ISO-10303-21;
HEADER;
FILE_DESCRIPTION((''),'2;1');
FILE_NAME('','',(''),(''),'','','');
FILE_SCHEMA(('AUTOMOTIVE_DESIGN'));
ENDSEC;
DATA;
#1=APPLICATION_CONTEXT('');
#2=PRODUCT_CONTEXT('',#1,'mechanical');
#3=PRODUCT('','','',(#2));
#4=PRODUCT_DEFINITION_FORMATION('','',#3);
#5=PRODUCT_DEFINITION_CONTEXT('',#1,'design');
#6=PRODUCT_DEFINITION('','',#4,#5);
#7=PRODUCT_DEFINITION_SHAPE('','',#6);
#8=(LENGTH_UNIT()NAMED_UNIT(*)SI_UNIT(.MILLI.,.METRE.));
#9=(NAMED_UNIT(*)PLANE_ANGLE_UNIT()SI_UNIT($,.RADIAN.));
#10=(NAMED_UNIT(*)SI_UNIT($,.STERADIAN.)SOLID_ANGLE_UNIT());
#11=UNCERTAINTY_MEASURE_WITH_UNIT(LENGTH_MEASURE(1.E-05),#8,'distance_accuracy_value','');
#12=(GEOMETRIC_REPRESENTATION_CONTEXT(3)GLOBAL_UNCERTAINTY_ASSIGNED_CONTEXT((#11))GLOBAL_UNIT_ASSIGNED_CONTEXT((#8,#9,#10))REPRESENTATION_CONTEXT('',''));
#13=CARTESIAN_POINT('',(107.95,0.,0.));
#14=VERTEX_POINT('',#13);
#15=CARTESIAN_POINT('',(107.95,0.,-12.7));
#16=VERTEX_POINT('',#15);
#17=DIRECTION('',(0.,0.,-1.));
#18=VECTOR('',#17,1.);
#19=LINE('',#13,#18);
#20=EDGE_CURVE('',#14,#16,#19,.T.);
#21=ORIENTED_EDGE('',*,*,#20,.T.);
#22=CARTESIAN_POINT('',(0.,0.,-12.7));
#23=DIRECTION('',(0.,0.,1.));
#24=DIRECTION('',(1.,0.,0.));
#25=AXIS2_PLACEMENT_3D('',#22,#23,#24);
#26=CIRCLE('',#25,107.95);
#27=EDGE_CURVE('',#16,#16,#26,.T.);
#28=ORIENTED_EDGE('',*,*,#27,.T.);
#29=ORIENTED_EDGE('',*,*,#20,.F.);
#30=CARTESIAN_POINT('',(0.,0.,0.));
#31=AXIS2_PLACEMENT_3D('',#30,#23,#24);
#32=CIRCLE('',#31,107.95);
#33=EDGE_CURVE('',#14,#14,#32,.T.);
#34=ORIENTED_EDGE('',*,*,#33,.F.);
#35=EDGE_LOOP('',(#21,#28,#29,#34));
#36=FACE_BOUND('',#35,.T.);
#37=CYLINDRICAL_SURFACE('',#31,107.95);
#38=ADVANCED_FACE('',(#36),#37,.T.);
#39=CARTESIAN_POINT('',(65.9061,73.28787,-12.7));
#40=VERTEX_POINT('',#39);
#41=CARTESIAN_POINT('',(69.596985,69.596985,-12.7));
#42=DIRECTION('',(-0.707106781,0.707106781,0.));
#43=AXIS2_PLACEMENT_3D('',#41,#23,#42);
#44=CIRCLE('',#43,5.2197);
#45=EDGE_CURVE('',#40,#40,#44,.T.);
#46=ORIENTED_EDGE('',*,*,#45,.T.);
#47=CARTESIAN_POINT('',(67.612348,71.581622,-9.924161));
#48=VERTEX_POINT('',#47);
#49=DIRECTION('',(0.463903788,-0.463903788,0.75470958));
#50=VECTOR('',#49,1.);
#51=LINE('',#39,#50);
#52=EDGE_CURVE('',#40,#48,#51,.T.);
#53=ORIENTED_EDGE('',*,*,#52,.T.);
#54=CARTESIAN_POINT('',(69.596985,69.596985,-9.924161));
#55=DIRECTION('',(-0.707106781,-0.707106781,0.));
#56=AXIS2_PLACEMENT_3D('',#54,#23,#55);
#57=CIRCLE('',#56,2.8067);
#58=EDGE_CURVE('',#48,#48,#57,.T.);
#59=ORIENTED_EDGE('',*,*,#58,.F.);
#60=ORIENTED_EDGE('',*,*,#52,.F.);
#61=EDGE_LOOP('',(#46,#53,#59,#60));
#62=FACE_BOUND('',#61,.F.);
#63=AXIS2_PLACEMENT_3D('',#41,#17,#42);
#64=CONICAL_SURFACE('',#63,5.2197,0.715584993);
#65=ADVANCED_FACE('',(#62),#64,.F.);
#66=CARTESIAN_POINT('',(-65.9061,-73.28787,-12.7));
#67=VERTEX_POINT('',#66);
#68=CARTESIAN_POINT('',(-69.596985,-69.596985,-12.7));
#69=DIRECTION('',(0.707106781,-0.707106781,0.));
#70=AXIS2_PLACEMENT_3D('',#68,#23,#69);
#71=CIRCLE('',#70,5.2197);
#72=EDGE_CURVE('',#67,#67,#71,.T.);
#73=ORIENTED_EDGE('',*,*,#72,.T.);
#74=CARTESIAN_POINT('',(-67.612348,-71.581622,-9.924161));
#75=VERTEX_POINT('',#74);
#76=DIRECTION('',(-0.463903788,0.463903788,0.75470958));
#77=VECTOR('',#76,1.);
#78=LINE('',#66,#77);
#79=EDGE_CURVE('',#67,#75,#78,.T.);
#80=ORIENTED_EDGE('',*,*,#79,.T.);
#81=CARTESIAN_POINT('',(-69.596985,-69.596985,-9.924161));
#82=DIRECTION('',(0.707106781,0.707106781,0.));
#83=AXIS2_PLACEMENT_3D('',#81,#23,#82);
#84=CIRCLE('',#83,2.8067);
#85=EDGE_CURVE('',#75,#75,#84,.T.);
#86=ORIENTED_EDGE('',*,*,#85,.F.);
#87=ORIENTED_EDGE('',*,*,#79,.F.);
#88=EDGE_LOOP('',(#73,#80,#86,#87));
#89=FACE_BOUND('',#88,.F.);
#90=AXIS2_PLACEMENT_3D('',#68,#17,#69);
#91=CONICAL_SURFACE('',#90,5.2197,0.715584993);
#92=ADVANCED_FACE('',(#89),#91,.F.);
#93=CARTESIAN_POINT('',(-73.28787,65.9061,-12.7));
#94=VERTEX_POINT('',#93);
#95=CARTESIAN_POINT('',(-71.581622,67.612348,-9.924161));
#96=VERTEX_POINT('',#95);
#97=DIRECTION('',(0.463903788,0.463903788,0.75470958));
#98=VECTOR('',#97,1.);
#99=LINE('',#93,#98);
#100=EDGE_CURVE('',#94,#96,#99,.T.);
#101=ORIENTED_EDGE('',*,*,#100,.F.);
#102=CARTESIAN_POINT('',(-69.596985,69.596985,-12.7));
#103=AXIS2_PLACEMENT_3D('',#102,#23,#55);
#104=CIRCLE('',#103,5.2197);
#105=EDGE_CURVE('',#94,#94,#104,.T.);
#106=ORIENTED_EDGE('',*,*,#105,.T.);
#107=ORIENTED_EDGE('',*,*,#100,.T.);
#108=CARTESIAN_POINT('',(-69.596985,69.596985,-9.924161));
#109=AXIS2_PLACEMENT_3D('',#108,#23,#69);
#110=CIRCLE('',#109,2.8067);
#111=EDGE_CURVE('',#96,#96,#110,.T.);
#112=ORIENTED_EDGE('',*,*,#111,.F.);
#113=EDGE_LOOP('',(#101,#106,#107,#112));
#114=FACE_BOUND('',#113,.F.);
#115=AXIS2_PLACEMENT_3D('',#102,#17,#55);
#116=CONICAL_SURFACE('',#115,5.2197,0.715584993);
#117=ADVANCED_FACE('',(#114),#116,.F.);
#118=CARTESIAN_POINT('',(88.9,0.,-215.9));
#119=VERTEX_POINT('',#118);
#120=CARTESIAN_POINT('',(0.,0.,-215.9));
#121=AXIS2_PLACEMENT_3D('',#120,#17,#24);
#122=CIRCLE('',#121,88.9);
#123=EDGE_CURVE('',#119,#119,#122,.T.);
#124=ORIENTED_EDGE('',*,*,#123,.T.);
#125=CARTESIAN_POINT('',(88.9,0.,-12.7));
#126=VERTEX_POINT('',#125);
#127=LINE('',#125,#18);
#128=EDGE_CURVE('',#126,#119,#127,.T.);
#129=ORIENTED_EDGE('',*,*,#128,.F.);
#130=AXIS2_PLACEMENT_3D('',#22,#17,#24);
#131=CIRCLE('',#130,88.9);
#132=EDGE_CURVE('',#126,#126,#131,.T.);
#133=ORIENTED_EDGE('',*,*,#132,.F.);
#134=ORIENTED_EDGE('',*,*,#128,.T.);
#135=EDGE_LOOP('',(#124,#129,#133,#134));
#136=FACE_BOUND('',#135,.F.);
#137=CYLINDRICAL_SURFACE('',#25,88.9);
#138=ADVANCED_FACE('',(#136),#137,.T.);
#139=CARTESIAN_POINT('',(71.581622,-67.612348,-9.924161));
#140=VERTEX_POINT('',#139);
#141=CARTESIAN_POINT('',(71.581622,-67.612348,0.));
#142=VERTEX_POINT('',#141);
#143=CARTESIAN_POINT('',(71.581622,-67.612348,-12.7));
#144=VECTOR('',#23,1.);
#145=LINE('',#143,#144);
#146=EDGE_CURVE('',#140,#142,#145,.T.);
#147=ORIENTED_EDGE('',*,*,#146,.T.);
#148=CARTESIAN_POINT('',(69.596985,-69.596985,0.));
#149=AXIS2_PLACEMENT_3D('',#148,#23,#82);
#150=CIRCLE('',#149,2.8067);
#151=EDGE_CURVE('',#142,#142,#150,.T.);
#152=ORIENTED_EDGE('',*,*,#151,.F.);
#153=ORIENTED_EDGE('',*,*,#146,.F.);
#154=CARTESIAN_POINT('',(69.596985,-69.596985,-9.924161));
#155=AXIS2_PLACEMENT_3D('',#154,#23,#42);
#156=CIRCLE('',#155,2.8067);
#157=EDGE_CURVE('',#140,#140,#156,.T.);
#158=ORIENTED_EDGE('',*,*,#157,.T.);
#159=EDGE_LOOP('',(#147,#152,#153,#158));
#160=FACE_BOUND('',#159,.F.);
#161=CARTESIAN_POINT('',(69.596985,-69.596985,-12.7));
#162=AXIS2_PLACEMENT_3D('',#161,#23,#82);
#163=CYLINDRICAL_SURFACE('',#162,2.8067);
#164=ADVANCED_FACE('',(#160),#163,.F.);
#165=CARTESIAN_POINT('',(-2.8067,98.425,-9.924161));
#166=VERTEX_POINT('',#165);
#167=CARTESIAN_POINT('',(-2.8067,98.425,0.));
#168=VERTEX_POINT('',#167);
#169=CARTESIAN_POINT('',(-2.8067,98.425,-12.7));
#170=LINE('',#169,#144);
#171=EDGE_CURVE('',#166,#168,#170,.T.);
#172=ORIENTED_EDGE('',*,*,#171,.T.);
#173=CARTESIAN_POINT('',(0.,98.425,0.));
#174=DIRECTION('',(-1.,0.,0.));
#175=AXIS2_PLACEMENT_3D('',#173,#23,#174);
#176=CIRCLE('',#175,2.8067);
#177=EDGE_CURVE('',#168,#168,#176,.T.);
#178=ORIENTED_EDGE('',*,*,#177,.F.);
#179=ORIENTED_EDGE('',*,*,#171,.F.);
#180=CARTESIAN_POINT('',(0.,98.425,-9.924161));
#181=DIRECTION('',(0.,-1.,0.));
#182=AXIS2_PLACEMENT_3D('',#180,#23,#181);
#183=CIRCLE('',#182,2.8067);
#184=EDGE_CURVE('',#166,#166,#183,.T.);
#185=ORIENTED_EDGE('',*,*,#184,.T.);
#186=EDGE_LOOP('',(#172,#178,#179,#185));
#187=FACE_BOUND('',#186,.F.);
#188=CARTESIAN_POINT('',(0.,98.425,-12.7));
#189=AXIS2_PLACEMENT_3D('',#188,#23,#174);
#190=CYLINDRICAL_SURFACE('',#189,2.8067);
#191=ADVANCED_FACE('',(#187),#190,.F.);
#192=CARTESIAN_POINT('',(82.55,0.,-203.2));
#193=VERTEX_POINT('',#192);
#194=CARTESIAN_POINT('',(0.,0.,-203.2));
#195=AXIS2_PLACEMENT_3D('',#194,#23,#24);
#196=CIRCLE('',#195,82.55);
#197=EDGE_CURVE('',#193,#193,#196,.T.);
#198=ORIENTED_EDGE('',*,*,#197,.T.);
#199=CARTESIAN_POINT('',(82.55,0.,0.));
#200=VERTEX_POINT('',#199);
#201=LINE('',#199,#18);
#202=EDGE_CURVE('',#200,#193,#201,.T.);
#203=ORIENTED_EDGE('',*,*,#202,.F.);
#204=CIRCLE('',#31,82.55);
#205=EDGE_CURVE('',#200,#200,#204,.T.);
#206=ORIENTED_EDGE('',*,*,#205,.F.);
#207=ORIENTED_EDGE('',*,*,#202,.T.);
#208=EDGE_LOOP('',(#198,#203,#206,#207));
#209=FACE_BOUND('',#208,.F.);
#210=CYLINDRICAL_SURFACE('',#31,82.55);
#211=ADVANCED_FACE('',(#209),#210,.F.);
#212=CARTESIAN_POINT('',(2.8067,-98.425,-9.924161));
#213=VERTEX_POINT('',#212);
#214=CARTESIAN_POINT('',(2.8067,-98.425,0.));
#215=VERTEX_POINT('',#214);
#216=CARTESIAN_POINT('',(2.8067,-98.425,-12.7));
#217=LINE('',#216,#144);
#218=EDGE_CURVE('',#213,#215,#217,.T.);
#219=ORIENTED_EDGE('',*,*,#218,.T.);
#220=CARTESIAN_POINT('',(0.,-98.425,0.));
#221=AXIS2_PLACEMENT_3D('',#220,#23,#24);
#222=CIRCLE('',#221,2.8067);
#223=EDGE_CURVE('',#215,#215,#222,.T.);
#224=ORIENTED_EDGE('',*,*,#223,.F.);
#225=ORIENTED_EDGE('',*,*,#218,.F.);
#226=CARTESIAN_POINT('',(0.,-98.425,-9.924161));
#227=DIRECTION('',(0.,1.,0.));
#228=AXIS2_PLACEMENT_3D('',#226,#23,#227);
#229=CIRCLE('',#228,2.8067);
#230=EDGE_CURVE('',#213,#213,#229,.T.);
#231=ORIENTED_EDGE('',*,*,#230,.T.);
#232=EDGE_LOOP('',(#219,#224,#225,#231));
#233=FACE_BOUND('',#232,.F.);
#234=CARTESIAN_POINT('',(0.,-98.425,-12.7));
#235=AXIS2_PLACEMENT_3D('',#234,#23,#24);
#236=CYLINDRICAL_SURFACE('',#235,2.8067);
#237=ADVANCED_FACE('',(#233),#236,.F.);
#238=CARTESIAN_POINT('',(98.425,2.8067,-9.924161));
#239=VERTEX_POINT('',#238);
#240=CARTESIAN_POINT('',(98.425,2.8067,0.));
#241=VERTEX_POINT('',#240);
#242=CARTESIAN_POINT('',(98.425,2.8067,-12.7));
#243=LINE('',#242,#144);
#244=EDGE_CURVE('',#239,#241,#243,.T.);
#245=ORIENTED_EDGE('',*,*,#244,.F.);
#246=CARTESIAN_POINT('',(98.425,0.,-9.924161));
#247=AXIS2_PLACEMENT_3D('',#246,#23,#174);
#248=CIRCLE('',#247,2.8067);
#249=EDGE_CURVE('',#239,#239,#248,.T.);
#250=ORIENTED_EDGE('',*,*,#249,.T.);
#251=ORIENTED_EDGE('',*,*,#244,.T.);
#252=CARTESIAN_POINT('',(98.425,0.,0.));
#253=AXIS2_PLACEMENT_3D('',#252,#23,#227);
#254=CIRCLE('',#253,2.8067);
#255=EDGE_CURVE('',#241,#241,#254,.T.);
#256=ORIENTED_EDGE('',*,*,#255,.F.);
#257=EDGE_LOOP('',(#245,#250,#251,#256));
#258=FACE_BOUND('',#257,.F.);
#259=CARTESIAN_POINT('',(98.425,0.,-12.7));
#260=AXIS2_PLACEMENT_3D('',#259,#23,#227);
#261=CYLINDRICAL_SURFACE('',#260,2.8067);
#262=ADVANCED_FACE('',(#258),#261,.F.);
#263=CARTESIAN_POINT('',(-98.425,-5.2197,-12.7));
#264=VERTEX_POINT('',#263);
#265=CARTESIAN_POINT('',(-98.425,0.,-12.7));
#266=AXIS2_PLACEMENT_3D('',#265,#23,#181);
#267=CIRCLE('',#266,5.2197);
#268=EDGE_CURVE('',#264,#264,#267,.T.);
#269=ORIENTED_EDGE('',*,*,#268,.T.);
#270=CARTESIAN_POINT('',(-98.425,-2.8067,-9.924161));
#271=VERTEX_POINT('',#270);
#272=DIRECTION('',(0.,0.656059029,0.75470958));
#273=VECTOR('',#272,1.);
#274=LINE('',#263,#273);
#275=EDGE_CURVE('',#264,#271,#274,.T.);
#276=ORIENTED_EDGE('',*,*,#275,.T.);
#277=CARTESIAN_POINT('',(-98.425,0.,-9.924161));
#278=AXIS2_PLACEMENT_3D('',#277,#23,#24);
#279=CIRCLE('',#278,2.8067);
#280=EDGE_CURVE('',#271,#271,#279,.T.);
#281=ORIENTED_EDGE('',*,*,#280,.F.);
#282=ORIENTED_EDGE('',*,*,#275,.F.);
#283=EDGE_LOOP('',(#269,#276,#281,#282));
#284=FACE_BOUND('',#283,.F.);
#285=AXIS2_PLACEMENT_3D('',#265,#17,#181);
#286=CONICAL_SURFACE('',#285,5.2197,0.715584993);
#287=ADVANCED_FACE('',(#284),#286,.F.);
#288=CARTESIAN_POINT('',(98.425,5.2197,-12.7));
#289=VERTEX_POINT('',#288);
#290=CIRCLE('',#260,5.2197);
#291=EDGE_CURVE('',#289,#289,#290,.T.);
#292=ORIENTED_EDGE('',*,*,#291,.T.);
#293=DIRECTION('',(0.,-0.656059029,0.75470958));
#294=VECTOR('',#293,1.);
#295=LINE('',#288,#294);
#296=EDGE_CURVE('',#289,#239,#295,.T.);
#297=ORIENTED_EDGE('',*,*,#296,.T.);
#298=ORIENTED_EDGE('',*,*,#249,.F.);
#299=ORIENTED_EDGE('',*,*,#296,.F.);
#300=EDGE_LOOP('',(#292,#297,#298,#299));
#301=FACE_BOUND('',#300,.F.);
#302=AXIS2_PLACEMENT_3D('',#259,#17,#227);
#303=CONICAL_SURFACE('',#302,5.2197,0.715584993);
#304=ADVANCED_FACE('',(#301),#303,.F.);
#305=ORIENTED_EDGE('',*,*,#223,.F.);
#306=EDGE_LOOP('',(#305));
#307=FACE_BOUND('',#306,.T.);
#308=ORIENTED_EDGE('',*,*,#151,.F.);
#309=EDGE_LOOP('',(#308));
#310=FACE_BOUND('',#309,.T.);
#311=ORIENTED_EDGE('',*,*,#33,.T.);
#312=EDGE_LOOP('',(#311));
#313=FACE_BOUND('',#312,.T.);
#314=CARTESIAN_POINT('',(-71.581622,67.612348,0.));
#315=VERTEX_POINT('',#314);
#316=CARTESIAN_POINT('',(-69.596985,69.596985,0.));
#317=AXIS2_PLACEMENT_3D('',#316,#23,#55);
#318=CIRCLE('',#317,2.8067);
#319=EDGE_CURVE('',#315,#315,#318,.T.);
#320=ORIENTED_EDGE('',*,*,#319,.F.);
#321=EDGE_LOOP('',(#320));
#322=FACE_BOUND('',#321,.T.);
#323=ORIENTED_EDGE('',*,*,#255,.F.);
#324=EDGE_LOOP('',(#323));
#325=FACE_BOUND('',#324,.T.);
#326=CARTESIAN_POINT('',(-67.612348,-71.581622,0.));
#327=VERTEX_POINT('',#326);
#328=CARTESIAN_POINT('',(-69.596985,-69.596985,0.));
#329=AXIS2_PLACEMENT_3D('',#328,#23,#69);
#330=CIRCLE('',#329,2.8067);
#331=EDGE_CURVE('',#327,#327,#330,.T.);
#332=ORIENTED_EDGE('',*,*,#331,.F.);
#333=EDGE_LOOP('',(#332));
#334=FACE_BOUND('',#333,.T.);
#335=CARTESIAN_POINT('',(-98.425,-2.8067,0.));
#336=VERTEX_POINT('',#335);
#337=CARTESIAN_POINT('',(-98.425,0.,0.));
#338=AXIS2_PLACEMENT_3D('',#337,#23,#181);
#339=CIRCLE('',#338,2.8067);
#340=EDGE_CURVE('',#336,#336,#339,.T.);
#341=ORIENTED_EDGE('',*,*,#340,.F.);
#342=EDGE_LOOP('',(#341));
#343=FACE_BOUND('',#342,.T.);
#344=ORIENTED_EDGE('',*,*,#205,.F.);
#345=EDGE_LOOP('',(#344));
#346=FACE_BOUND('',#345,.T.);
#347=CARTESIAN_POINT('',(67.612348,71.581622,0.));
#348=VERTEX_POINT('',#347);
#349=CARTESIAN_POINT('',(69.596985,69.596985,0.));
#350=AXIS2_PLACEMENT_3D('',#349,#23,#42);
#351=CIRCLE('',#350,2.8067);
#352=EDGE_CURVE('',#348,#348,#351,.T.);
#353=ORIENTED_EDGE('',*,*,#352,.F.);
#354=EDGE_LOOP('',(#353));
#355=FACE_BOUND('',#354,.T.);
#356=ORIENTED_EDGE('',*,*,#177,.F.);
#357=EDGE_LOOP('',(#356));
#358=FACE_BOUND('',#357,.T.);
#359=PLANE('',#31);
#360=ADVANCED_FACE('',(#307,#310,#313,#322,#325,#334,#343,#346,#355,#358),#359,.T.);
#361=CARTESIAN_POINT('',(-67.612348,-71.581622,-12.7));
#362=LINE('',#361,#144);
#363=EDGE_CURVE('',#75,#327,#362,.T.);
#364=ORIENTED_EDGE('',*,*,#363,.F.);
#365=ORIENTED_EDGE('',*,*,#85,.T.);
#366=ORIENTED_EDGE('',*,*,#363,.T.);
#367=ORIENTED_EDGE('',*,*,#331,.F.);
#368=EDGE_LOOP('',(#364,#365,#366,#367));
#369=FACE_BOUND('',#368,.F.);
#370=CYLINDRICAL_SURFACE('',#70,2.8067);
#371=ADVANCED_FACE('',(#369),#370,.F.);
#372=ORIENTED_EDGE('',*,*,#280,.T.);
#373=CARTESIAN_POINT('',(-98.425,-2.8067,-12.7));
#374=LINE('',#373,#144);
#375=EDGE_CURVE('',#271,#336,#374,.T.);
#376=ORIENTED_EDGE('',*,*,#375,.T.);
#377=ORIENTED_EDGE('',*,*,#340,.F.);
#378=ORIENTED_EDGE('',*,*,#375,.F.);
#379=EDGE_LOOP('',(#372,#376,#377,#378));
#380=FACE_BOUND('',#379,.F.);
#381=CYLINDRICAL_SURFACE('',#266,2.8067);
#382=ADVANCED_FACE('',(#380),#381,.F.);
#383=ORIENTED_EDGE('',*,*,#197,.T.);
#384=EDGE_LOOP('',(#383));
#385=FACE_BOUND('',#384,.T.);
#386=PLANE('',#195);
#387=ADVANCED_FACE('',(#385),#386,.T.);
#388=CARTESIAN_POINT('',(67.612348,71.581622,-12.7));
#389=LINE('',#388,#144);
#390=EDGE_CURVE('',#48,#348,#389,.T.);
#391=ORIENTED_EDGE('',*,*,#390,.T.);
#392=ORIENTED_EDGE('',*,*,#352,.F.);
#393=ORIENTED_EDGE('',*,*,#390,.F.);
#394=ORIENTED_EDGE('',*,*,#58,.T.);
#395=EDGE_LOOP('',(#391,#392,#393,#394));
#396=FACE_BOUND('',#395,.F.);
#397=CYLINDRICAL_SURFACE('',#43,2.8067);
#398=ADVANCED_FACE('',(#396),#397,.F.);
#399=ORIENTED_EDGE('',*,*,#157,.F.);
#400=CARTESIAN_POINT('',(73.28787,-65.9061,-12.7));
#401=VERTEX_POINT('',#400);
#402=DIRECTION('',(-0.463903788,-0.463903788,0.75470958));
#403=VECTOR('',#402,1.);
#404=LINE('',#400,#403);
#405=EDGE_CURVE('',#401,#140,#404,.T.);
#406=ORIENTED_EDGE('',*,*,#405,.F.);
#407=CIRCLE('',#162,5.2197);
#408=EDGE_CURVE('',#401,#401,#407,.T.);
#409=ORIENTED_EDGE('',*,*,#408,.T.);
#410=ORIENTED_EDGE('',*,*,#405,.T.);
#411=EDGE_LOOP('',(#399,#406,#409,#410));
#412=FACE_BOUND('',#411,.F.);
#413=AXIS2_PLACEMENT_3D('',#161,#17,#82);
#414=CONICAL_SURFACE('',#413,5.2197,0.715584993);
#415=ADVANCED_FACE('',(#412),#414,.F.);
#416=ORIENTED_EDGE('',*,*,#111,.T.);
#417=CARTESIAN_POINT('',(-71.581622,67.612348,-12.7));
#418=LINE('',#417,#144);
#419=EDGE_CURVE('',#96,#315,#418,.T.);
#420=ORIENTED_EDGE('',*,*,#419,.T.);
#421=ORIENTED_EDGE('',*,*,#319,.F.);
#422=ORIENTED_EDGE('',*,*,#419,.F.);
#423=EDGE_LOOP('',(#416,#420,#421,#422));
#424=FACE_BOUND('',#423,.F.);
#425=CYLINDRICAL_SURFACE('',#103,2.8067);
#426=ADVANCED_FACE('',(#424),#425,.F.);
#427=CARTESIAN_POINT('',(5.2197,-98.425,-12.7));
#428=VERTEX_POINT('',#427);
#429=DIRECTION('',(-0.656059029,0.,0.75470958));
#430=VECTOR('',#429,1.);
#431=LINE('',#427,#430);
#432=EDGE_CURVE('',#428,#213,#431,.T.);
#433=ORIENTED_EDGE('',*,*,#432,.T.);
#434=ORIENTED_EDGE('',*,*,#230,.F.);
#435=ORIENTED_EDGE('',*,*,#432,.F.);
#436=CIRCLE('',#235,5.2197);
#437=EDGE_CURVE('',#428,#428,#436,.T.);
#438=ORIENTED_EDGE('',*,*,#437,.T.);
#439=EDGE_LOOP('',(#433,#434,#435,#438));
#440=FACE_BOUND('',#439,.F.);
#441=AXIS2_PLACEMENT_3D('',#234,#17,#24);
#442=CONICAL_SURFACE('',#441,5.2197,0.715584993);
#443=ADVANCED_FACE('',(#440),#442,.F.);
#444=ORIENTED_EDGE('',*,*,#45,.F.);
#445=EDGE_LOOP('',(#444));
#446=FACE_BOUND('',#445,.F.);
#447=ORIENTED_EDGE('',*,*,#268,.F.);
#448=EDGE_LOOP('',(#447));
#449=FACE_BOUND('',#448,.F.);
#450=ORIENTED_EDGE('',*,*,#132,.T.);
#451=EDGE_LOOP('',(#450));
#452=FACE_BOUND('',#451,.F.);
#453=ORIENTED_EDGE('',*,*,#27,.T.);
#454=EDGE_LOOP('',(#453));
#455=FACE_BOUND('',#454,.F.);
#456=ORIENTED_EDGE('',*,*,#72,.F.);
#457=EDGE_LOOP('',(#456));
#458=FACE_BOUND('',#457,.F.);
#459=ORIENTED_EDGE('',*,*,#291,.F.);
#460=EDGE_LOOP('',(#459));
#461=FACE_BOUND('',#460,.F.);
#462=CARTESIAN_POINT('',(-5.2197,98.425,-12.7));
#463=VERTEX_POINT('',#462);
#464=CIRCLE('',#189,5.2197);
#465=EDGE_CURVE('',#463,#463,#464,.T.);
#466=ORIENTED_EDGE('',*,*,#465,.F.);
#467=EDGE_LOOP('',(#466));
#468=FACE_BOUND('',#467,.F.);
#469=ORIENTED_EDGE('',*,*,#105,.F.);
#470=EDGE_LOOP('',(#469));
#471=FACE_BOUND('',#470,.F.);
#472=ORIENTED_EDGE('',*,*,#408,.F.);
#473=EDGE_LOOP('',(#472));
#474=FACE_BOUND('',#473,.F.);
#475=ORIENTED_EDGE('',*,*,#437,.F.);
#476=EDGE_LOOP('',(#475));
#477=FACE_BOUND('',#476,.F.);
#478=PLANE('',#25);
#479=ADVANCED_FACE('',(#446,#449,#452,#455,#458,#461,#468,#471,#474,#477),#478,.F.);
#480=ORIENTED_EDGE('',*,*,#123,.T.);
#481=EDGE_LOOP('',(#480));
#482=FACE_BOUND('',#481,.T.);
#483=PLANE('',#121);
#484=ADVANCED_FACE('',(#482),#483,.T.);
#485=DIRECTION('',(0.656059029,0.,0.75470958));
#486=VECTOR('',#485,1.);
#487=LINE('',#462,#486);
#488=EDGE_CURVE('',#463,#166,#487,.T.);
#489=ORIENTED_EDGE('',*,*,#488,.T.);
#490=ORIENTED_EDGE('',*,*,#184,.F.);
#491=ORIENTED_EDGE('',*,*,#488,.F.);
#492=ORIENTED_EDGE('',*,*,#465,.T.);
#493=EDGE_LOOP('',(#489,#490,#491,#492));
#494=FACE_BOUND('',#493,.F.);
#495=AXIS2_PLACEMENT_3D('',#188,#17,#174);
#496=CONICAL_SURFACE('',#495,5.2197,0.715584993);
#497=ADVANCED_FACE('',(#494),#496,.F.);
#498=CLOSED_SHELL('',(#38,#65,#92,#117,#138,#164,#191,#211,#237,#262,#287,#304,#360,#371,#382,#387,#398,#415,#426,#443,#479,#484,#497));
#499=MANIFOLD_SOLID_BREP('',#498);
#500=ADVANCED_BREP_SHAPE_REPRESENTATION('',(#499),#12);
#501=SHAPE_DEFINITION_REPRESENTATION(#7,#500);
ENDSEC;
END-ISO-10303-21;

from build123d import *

# Parameters (mm, degrees)
F0_R            = 107.95
F1_DEPTH        = 12.7
F2_R            = 88.9
F3_DEPTH        = 203.2
F4_R            = 82.55
F5_DEPTH        = 203.2
F7_D            = 5.6134
F7_CSINK_D      = 10.4394
F7_CSINK_ANGLE  = 82
F7_COPIES_COUNT = 8


# Not quite as in the source:
# - a pattern or mirror of a feature is missing from the dataset's text; its kind, count and spacing are read off the source's solid


with BuildPart() as f1:
    # F0 (on Top) → F1 (new body)
    with BuildSketch(Plane.XY):
        Circle(F0_R)
    extrude(amount=-F1_DEPTH)

    # F2 (on face) → F3 (join)
    with BuildSketch(Plane(origin=(0, 0, -12.7), x_dir=(1, 0, 0), z_dir=(0, 0, -1))):
        Circle(F2_R)
    extrude(amount=F3_DEPTH)

    # F4 (on face) → F5 (cut)
    with BuildSketch(Plane.XY):
        Circle(F4_R)
    extrude(amount=-F5_DEPTH, mode=Mode.SUBTRACT)

    # F7 (through all)
    with Locations(Plane(origin=(0, 0, -12.7), x_dir=(1, 0, 0), z_dir=(0, 0, -1))):
        with Locations((0, -98.425)):
            f7 = CounterSinkHole(F7_D / 2, F7_CSINK_D / 2, counter_sink_angle=F7_CSINK_ANGLE)

    # F7_copies: F7 ×8 about axis
    f7_copies_axis = Axis((0, 0, 0), (0, 0, 1))
    for i in range(1, F7_COPIES_COUNT):
        add(f7.rotate(f7_copies_axis, i * 360 / F7_COPIES_COUNT), mode=Mode.SUBTRACT)


solid = f1.part
